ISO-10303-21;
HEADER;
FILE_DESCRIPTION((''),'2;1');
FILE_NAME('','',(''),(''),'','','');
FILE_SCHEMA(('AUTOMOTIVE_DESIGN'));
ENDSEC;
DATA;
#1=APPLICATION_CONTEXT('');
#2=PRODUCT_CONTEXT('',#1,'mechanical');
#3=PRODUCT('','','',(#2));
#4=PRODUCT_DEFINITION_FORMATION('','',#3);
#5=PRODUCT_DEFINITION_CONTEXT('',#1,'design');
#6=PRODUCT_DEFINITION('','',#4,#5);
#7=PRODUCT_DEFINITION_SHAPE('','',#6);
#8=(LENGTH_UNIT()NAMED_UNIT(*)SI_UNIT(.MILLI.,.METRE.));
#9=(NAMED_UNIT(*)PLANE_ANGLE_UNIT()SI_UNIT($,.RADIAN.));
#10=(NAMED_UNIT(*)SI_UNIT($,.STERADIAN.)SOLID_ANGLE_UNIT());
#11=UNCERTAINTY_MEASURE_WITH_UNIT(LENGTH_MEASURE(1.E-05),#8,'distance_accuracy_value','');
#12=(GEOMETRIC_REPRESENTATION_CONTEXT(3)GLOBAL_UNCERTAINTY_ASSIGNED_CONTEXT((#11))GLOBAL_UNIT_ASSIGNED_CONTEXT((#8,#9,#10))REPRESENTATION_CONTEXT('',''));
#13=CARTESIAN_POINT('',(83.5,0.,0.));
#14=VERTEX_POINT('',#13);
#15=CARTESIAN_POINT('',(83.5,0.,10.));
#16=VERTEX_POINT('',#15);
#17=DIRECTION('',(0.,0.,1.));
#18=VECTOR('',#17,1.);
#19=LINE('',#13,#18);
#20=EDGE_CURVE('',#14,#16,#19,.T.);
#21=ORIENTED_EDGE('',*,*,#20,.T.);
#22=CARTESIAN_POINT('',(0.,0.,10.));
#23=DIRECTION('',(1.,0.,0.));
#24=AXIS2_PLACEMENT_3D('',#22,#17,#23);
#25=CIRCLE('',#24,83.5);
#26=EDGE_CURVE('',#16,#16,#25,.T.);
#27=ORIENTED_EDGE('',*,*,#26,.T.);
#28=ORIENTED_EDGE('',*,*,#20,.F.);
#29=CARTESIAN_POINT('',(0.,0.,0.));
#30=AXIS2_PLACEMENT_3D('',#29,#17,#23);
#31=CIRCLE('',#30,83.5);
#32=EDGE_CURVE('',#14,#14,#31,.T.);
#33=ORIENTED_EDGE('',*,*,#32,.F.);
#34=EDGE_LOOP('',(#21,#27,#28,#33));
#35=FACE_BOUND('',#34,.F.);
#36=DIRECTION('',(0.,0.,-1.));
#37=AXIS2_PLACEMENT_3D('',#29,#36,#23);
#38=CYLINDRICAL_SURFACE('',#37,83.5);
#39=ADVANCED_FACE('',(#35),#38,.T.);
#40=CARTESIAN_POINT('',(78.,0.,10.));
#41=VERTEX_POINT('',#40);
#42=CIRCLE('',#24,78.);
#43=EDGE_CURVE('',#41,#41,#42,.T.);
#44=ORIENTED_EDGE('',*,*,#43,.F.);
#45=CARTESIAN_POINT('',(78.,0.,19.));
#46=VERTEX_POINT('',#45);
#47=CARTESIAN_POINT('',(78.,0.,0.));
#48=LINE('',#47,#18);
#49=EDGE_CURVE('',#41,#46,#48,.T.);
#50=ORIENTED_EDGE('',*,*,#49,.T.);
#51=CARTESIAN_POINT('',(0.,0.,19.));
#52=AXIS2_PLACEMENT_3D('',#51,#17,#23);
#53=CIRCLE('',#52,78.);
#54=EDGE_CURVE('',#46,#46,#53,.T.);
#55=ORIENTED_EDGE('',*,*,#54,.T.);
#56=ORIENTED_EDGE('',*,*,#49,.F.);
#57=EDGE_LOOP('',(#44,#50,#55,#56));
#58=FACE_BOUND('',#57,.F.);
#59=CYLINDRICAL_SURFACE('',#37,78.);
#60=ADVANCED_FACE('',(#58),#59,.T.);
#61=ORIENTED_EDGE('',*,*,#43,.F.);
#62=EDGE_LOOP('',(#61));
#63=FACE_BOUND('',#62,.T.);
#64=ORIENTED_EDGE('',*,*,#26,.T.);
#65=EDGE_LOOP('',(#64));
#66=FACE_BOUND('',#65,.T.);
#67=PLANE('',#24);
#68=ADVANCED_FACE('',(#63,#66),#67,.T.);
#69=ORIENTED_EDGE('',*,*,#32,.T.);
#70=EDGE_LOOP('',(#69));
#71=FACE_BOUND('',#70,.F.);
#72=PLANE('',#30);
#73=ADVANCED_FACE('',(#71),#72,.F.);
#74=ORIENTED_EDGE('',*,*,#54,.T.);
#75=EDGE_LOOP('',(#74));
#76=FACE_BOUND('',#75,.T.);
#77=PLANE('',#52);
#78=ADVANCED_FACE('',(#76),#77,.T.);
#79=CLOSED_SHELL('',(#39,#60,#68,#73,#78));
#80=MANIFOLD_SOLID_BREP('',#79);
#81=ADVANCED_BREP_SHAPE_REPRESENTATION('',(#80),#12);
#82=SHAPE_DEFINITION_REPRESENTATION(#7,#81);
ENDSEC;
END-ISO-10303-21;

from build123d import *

# Parameters (mm, degrees)
F0_R     = 78
F1_DEPTH = 19
F0_R_2   = 83.5
F2_DEPTH = 10


# Not quite as in the source:
# - a feature of the source that left no trace in its solid (it failed there, or was rolled back) is left out


with BuildPart() as f1:
    # F0 (on Top) → F1 (new body)
    with BuildSketch(Plane.XY):
        Circle(F0_R)
    extrude(amount=F1_DEPTH)

    # F0 (on Top) → F2 (join)
    with BuildSketch(Plane.XY):
        Circle(F0_R_2)
        Circle(F0_R, mode=Mode.SUBTRACT)
    extrude(amount=F2_DEPTH)


solid = f1.part
